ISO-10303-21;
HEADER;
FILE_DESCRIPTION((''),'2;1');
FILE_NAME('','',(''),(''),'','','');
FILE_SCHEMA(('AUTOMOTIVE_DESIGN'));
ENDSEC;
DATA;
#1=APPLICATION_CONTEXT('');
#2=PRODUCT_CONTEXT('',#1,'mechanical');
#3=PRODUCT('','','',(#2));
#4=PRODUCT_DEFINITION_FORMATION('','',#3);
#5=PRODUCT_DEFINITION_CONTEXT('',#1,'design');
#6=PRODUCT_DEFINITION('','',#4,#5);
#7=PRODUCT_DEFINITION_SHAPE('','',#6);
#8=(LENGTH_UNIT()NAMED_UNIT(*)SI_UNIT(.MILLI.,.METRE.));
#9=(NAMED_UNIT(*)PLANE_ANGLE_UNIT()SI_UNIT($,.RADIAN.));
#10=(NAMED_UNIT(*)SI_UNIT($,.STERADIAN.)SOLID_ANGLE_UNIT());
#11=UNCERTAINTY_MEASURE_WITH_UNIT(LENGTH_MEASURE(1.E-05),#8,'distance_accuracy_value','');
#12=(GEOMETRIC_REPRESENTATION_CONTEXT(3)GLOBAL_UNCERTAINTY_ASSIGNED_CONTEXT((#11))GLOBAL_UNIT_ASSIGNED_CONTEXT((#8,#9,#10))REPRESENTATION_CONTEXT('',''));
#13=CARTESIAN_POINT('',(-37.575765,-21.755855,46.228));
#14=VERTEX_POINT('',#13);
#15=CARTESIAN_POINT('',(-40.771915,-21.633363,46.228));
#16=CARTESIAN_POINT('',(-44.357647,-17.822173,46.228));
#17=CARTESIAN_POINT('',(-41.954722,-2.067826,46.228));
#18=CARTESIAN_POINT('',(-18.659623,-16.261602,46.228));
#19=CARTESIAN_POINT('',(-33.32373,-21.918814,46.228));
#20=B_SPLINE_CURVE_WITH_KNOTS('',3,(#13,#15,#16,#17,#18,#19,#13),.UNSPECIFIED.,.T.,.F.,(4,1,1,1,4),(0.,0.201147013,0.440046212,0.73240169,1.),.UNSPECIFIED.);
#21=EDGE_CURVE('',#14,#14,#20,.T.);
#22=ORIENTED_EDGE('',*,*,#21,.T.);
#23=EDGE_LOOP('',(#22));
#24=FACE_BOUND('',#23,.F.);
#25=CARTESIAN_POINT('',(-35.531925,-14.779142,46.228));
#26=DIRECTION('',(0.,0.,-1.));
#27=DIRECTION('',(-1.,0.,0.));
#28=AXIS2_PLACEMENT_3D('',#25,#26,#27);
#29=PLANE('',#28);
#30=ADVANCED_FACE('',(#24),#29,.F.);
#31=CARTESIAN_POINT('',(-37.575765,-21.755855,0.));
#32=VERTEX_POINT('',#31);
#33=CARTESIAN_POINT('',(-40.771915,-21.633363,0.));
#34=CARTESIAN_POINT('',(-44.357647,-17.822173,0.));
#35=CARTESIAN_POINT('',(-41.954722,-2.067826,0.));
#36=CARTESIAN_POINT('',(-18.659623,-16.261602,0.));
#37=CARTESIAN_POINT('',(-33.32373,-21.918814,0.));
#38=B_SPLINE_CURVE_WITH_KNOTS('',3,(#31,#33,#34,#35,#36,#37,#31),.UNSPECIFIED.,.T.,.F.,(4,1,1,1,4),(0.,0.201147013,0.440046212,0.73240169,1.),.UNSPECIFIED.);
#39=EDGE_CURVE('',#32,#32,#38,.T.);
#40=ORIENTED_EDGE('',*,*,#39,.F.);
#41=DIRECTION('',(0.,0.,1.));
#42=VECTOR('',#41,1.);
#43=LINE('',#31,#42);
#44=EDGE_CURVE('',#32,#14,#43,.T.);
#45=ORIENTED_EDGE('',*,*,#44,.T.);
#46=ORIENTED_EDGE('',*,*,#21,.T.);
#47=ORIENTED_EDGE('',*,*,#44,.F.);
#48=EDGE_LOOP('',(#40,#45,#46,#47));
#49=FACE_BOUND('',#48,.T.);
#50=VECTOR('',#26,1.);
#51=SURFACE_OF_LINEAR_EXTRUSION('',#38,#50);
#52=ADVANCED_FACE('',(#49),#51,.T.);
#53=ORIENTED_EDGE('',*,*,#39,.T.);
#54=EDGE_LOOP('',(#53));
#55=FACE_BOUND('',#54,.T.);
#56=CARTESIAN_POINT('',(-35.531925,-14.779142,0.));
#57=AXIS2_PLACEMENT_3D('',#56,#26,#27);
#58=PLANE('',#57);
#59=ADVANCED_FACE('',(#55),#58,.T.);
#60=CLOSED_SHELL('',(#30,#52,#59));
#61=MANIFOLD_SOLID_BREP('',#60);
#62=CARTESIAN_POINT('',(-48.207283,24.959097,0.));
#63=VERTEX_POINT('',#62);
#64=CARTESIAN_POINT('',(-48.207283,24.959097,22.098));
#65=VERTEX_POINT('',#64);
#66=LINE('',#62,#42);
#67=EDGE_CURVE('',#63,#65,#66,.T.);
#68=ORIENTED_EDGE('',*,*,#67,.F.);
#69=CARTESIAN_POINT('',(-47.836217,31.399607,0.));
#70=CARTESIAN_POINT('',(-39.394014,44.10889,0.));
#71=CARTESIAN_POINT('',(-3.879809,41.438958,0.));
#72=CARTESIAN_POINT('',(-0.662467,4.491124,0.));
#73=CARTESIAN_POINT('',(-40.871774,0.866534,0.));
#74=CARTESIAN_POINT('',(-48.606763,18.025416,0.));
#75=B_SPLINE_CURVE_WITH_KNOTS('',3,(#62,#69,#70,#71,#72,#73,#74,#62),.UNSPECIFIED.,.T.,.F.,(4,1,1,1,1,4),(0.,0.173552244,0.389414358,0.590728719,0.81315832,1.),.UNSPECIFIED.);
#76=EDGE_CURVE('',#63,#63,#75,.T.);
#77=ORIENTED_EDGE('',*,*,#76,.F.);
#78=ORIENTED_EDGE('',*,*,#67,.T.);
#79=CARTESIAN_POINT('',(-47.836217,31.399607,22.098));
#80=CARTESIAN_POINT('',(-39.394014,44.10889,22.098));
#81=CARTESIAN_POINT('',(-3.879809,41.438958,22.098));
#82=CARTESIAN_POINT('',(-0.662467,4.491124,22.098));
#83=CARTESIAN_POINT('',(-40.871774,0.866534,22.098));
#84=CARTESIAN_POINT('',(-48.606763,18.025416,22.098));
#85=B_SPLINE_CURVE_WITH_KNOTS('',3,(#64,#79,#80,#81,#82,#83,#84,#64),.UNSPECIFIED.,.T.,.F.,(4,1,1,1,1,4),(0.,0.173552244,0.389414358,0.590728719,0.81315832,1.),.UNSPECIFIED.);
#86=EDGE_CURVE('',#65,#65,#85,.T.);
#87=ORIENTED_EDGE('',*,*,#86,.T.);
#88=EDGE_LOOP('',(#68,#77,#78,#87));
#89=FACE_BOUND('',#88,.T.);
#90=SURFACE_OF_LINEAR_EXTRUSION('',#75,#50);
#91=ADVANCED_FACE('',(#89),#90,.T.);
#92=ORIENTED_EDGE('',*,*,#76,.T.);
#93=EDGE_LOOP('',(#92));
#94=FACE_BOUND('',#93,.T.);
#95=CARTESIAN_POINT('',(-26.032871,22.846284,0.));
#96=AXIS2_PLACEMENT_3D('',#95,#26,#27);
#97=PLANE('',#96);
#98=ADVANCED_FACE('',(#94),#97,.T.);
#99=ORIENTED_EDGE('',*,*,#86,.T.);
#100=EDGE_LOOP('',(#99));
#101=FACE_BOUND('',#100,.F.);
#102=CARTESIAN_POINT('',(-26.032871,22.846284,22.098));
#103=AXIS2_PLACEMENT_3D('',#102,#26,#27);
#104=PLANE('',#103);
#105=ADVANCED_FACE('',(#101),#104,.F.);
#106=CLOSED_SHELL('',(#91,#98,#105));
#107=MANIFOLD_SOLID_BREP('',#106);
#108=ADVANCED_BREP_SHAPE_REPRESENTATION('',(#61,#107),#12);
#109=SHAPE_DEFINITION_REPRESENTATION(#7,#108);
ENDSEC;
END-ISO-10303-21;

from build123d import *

# Parameters (mm, degrees)
F1_DEPTH = 22.098
F3_DEPTH = 46.228


with BuildPart() as f1:
    # F0 (on Top) → F1 (new body)
    with BuildSketch(Plane.XY):
        with BuildLine():
            add(Edge.make_bspline(
                [(-48.20728302, 24.9590966851), (-47.836216593, 31.3996072925), (-39.3940143743, 44.1088899766), (-3.8798088354, 41.4389580726), (-0.6624669754, 4.4911238271), (-40.8717736331, 0.8665344833), (-48.6067631615, 18.0254160776), (-48.20728302, 24.9590966851)],
                knots=[0, 0, 0, 0, 0.1735522435, 0.3894143581, 0.5907287191, 0.8131583196, 1, 1, 1, 1], degree=3))
        make_face()
    extrude(amount=F1_DEPTH)


with BuildPart() as f3:
    # F2 (on Top) → F3 (new body)
    with BuildSketch(Plane.XY):
        with BuildLine():
            add(Edge.make_bspline(
                [(-37.575765118, -21.75585535), (-40.771914841, -21.6333632841), (-44.3576469976, -17.8221725874), (-41.9547217235, -2.0678263136), (-18.6596234083, -16.2616017748), (-33.3237295059, -21.9188141197), (-37.575765118, -21.75585535)],
                knots=[0, 0, 0, 0, 0.2011470133, 0.4400462119, 0.7324016902, 1, 1, 1, 1], degree=3))
        make_face()
    extrude(amount=F3_DEPTH)


solid = Compound([f1.part, f3.part])
